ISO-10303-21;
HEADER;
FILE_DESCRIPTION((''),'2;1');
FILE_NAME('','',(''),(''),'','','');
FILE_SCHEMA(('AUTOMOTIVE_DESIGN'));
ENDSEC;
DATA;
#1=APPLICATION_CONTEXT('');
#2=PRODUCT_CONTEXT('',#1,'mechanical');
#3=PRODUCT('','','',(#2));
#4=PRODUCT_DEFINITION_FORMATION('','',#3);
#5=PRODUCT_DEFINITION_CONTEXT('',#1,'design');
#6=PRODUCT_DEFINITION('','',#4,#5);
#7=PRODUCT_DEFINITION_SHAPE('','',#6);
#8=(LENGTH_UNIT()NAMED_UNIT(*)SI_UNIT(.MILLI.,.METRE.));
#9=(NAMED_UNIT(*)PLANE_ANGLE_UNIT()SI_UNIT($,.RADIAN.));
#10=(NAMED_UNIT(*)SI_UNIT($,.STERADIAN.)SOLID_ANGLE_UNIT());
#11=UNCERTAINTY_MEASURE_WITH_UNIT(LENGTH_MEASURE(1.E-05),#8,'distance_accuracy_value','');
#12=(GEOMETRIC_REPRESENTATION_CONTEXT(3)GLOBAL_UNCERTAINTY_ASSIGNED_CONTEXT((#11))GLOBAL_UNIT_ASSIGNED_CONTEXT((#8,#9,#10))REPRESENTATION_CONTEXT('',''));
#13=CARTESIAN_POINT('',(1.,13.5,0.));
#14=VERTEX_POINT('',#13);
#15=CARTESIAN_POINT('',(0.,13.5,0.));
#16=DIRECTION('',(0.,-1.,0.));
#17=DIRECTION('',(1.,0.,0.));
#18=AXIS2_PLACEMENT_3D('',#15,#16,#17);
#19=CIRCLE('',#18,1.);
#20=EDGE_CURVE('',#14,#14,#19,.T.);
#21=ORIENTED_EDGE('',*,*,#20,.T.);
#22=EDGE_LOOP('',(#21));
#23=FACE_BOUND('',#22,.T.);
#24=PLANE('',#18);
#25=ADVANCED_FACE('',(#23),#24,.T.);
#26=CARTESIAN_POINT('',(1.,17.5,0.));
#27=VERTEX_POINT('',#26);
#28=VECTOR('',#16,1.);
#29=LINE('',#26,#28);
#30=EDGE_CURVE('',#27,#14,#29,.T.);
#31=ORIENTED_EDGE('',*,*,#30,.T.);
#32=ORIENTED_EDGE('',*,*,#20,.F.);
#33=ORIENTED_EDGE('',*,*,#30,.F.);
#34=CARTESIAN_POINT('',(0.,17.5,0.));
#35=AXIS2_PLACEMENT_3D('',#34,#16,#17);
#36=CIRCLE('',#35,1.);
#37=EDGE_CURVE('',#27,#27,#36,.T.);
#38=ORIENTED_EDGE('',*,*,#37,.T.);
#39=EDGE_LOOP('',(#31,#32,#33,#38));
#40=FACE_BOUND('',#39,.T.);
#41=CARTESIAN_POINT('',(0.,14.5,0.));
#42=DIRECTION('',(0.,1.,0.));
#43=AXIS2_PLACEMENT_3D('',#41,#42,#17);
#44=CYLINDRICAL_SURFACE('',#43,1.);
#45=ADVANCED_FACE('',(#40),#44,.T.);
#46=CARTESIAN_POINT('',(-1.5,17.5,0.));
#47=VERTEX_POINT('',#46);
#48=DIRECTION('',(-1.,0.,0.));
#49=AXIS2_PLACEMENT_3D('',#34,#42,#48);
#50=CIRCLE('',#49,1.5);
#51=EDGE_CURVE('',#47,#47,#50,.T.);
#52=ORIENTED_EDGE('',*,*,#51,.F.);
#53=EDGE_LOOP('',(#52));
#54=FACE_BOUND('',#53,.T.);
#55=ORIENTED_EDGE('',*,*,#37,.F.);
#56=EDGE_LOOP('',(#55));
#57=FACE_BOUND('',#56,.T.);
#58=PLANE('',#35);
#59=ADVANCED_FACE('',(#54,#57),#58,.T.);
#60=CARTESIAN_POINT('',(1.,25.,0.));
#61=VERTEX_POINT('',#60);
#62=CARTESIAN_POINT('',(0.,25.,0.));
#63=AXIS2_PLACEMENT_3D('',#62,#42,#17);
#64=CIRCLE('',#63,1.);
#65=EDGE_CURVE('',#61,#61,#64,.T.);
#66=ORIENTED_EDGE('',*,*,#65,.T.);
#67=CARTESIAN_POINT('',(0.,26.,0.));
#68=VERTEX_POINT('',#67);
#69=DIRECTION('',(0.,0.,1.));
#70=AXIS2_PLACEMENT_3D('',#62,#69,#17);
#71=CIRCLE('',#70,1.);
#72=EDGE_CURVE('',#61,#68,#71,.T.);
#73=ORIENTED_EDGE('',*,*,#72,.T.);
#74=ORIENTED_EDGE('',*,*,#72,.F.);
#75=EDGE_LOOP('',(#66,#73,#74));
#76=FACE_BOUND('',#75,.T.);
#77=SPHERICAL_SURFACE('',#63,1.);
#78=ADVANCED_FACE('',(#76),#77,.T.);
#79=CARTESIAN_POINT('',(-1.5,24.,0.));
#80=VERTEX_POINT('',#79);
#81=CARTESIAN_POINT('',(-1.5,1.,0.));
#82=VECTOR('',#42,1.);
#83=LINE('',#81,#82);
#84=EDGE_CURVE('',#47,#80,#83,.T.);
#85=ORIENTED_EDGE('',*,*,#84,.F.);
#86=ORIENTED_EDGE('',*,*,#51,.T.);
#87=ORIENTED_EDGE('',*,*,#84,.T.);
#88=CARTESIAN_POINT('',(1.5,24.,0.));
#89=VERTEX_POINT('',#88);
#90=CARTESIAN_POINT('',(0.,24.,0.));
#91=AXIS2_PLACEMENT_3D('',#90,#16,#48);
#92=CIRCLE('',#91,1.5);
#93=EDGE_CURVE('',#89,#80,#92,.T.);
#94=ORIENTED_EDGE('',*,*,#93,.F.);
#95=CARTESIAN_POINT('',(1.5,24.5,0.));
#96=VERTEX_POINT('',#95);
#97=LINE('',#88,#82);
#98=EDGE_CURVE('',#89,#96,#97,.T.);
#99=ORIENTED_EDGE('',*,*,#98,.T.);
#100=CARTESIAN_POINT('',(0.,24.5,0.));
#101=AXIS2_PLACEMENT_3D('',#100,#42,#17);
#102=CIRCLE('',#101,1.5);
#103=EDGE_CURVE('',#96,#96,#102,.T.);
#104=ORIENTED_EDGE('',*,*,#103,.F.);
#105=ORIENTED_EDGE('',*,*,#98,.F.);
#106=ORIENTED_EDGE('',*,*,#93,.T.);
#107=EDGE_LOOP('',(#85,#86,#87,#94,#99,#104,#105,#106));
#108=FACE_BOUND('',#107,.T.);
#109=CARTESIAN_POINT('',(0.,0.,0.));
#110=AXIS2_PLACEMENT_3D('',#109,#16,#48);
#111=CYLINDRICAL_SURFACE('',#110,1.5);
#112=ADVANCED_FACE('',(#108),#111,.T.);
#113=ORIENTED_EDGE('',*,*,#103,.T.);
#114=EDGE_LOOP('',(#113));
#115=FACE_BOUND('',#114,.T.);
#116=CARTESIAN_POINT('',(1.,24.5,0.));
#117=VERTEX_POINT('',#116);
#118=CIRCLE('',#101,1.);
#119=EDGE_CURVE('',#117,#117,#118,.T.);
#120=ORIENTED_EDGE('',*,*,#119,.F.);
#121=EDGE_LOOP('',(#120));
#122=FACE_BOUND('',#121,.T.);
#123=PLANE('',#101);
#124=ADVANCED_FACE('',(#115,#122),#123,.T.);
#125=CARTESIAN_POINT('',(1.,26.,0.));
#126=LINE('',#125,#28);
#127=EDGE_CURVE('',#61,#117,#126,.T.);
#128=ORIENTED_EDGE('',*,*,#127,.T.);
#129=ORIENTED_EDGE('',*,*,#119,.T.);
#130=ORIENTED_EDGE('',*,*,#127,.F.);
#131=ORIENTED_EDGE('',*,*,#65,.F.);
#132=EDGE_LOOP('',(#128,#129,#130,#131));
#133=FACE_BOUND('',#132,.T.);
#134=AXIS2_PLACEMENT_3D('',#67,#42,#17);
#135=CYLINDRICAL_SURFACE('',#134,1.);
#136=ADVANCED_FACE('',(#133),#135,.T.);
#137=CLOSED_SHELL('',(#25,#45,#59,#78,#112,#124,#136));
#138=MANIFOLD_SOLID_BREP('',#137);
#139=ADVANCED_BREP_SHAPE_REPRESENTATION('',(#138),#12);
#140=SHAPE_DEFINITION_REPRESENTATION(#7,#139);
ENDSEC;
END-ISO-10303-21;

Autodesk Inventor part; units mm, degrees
ref_plane "YZ Plane" through (0, 0, 0) normal (1, 0, 0) x (0, 1, 0)
ref_plane "XZ Plane" through (0, 0, 0) normal (0, 1, 0) x (-1, 0, 0)
ref_plane "XY Plane" through (0, 0, 0) normal (0, 0, 1) x (1, 0, 0)
sketch "Sketch1" plane through (0, 0, 0) normal (0, 1, 0) x (-1, 0, 0)
  circle A0 centre (0, 0) radius 1.5
  dimension "d0" = 3
extrude "Extrusion1" add sketch "Sketch1" along normal blind 25
sketch "Sketch2" plane through (0, 25, 0) normal (0, 1, 0) x (1, 0, 0)
  circle A0 centre (0, 0) radius 1.5
extrude "Extrusion2" add sketch "Sketch2" along normal blind 2
sketch "Sketch3" plane through (0, 27, 0) normal (0, 1, 0) x (1, 0, 0)
  circle A0 centre (0, 0) radius 1.5
extrude "Extrusion3" cut sketch "Sketch3" against normal blind 1
sketch "Sketch4" plane through (0, 0, 0) normal (0, -1, 0) x (1, 0, 0)
  circle A0 centre (0, 0) radius 1.5
extrude "Extrusion4" cut sketch "Sketch4" against normal blind 1
sketch "Sketch5" plane through (0, 1, 0) normal (0, -1, 0) x (1, 0, 0)
  circle A0 centre (0, 0) radius 1
  circle A1 centre (0, 0) radius 1.5 projected
  circle A2 centre (0, 0) radius 1.5
  dimension "d9" = 2
extrude "Extrusion5" cut sketch "Sketch5" against normal blind 1.5
fillet "Fillet1" radius 1 1 edges at (-1, 1, 0)
sketch "Sketch6" plane through (0, 26, 0) normal (0, 1, 0) x (1, 0, 0)
  circle A0 centre (0, 0) radius 1.5
  circle A1 centre (0, 0) radius 1 projected
extrude "Extrusion6" cut sketch "Sketch6" against normal blind 2
fillet "Fillet2" radius 1 1 edges at (-1, 26, 0)
sketch "Sketch7" plane through (0, 24, 0) normal (0, 1, 0) x (1, 0, 0)
  circle A0 centre (0, 0) radius 1.5
  dimension "d16" = 3
extrude "Extrusion7" add sketch "Sketch7" along normal blind 0.5
sketch "Sketch8" plane through (0, 2.5, 0) normal (0, -1, 0) x (1, 0, 0)
  circle A0 centre (0, 0) radius 1.5
extrude "Extrusion8" cut sketch "Sketch8" along normal blind 5.5 and the other way blind 11
sketch "Sketch9" plane through (0, 13.5, 0) normal (0, -1, 0) x (1, 0, 0)
  circle A0 centre (0, 0) radius 1 projected
  circle A1 centre (0, 0) radius 1.5
extrude "Extrusion9" cut sketch "Sketch9" against normal blind 4
sketch "Sketch10" plane through (0, 13.5, 0) normal (0, -1, 0) x (1, 0, 0)
  circle A0 centre (0, 0) radius 1
extrude "Extrusion10" add sketch "Sketch10" along normal blind 1
sketch "Sketch11" plane through (0, 12.5, 0) normal (0, -1, 0) x (1, 0, 0)
  circle A0 centre (0, 0) radius 1
extrude "Extrusion11" cut sketch "Sketch11" against normal blind 2
sketch "Sketch12" plane through (0, 14.5, 0) normal (0, -1, 0) x (1, 0, 0)
  circle A0 centre (0, 0) radius 1
extrude "Extrusion12" add sketch "Sketch12" along normal blind 1
properties part number "Pin2"
